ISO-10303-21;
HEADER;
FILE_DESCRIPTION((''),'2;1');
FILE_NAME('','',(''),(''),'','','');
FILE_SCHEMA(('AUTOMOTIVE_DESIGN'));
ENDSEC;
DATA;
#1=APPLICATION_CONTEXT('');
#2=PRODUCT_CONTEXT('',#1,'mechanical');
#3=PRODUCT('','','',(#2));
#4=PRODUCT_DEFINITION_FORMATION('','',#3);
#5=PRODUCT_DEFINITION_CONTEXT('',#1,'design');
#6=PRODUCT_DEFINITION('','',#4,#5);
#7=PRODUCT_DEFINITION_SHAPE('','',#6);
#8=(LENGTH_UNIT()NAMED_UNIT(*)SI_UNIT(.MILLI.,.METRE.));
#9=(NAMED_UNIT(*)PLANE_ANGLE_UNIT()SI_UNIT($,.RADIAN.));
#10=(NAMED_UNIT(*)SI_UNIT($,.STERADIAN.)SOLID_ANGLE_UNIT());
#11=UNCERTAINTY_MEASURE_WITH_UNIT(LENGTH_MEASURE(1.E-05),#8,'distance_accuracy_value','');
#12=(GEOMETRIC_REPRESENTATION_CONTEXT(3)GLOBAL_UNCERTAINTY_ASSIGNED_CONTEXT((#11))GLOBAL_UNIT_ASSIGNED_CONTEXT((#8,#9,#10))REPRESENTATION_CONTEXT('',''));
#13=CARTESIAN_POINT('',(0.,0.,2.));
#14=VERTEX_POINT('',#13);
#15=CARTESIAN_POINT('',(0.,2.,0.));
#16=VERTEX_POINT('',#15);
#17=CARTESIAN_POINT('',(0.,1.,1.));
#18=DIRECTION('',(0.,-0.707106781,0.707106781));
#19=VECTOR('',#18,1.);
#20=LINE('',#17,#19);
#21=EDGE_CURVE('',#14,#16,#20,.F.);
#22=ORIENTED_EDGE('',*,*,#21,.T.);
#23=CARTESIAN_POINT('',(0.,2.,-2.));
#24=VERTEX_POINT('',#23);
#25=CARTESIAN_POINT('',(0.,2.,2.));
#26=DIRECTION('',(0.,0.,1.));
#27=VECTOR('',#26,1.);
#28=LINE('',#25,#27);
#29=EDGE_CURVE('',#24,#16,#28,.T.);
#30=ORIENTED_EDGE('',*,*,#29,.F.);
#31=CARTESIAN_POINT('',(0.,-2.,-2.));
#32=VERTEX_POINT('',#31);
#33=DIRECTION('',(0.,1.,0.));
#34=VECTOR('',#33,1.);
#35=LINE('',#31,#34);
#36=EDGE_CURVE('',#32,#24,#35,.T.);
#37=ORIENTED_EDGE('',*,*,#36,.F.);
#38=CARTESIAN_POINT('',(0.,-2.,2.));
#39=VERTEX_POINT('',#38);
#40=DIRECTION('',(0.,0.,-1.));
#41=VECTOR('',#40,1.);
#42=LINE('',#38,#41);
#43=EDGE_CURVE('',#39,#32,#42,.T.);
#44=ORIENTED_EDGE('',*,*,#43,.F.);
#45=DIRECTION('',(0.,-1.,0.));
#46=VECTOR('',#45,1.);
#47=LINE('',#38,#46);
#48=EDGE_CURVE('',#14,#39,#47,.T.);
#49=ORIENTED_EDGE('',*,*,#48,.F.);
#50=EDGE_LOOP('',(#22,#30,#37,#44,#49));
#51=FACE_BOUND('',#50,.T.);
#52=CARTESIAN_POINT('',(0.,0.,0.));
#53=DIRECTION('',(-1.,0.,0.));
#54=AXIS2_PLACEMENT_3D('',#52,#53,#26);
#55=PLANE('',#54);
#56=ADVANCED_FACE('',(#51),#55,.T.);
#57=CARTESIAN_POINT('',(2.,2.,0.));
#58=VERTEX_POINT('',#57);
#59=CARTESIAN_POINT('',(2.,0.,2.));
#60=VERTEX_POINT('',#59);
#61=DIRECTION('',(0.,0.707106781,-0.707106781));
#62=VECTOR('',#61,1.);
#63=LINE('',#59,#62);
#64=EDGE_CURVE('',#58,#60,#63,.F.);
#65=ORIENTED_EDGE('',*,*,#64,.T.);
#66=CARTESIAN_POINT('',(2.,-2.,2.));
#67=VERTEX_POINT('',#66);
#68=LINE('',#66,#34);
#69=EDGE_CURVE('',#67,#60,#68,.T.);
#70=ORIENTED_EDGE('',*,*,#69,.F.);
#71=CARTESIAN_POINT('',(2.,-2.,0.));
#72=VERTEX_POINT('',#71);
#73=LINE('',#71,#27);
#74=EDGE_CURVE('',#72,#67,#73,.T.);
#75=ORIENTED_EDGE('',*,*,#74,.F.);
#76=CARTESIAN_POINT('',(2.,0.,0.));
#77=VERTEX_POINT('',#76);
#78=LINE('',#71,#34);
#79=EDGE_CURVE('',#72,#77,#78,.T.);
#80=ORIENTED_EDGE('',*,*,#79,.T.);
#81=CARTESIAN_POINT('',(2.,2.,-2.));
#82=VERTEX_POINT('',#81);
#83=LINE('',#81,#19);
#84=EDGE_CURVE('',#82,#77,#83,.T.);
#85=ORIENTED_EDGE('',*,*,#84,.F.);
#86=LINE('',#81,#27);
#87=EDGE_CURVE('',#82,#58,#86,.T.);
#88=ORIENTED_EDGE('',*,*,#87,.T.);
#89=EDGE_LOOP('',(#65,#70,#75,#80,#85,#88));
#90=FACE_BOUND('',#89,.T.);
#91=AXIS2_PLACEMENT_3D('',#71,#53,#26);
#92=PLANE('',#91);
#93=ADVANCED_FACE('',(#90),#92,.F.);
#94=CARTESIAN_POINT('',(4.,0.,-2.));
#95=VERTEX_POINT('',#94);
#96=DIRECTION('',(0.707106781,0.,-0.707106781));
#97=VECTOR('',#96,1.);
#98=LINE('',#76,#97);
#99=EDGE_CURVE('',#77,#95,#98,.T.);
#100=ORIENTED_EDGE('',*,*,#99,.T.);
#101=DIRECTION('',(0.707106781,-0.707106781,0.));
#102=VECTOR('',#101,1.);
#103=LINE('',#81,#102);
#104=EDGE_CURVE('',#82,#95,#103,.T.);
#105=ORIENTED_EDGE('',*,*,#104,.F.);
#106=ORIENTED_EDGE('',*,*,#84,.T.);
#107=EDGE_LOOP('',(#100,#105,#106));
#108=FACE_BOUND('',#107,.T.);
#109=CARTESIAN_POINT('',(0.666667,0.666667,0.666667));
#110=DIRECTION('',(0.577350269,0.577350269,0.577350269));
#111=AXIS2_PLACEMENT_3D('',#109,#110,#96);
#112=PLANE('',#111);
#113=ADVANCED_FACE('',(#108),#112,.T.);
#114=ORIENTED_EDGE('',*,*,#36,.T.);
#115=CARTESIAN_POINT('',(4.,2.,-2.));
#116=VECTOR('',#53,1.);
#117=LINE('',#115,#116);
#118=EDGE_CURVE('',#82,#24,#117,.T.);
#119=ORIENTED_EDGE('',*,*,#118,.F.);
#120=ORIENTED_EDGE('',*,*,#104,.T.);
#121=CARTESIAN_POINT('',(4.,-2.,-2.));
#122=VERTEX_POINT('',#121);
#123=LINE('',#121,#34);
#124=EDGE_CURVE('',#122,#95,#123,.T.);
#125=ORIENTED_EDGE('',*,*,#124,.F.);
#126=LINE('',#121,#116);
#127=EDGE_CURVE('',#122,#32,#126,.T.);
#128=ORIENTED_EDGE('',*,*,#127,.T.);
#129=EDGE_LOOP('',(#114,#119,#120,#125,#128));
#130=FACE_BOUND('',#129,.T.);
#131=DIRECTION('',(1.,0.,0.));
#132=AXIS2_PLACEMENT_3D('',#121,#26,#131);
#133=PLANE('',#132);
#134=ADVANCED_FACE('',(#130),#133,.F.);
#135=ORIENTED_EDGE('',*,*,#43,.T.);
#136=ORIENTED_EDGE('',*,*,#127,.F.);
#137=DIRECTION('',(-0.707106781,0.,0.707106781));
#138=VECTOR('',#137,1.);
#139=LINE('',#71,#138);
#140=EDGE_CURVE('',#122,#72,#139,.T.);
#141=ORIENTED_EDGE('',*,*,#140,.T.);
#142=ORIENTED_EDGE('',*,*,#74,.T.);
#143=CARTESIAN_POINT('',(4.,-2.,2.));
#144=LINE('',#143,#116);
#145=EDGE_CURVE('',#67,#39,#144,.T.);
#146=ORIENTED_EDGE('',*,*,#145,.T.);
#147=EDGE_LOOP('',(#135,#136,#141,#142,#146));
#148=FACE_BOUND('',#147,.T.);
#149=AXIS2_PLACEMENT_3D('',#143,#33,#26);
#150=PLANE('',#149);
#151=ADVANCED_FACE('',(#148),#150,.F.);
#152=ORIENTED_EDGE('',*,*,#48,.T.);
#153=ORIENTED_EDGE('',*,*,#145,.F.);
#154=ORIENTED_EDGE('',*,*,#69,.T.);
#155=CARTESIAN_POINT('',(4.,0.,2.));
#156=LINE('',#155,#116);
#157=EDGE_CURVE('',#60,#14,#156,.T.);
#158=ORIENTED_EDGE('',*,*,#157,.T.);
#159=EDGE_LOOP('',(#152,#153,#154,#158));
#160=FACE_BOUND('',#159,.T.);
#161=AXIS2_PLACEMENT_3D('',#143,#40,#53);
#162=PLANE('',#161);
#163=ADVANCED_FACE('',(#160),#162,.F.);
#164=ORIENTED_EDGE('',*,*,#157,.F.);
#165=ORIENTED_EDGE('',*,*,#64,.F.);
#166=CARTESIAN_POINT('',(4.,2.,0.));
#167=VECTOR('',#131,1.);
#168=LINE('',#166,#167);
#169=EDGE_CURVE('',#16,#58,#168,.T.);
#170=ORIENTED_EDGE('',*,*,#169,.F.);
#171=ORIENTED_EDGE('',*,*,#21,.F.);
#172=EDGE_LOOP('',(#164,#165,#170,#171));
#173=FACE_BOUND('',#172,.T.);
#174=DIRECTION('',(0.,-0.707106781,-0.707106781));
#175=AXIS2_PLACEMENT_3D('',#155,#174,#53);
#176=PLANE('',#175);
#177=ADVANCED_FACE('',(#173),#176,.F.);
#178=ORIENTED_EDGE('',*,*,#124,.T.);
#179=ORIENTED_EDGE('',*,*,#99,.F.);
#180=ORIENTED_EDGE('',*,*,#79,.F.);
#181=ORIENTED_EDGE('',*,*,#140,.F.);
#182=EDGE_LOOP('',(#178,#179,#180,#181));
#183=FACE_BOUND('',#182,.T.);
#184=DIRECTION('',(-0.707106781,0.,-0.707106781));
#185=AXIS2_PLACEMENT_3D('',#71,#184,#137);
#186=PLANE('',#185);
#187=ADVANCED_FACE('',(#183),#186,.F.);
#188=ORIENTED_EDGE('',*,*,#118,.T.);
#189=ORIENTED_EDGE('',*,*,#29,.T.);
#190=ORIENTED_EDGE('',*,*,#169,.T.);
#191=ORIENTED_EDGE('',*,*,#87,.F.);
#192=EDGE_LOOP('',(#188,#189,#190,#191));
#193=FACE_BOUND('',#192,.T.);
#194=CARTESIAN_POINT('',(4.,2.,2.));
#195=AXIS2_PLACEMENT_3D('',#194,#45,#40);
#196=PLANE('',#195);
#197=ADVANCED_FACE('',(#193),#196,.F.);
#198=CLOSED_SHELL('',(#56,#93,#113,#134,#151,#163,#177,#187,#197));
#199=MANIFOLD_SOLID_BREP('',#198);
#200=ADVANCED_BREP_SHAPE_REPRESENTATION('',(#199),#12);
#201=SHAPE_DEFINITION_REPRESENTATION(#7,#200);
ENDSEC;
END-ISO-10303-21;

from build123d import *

# Parameters (mm, degrees)
SKETCH2_W           = 4
SKETCH2_H           = 4
BOSS_EXTRUDE1_DEPTH = 4
CUT_EXTRUDE1_DEPTH  = 4
CUT_EXTRUDE2_DEPTH  = 4
CHAMFER1_SIZE       = 2
CUT_EXTRUDE4_DEPTH  = 4


with BuildPart() as part:
    # Sketch2 → Boss-Extrude1 (new body)
    with BuildSketch(Plane(origin=(0, 0, 0), x_dir=(0, 0, -1), z_dir=(1, 0, 0))):
        Rectangle(SKETCH2_W, SKETCH2_H)
    extrude(amount=BOSS_EXTRUDE1_DEPTH)

    # Sketch3 → Cut-Extrude1 (cut)
    with BuildSketch(Plane.XY.offset(2)):
        Polygon((2, 2), (4, 0), (4, 2), align=None)
    extrude(amount=-CUT_EXTRUDE1_DEPTH, mode=Mode.SUBTRACT)

    # Sketch4 → Cut-Extrude2 (cut)
    with BuildSketch(Plane(origin=(0, 2, 0), x_dir=(1, 0, 0), z_dir=(0, 1, 0))):
        Polygon((2, 0), (4, 2), (4, -2), (2, -2), align=None)
    extrude(amount=-CUT_EXTRUDE2_DEPTH, mode=Mode.SUBTRACT)

    # Chamfer1
    chamfer1_edges = [part.edges().sort_by_distance(p)[0] for p in [
        (1, 2, 2),
    ]]
    chamfer(chamfer1_edges, length=CHAMFER1_SIZE)

    # 3DSketch1 → Cut-Extrude4 (cut, along a direction that is not the sketch's normal)
    with BuildSketch(Plane(origin=(2, 0, 0), x_dir=(0.7071067811865476, 0, -0.7071067811865476), z_dir=(0.5773502691896258, 0.5773502691896258, 0.5773502691896258))):
        Polygon((0, 0), (2.828427125, 0), (1.414213562, 2.449489743), align=None)
    extrude(amount=CUT_EXTRUDE4_DEPTH, dir=(0, 1, 0), mode=Mode.SUBTRACT)


solid = part.part
